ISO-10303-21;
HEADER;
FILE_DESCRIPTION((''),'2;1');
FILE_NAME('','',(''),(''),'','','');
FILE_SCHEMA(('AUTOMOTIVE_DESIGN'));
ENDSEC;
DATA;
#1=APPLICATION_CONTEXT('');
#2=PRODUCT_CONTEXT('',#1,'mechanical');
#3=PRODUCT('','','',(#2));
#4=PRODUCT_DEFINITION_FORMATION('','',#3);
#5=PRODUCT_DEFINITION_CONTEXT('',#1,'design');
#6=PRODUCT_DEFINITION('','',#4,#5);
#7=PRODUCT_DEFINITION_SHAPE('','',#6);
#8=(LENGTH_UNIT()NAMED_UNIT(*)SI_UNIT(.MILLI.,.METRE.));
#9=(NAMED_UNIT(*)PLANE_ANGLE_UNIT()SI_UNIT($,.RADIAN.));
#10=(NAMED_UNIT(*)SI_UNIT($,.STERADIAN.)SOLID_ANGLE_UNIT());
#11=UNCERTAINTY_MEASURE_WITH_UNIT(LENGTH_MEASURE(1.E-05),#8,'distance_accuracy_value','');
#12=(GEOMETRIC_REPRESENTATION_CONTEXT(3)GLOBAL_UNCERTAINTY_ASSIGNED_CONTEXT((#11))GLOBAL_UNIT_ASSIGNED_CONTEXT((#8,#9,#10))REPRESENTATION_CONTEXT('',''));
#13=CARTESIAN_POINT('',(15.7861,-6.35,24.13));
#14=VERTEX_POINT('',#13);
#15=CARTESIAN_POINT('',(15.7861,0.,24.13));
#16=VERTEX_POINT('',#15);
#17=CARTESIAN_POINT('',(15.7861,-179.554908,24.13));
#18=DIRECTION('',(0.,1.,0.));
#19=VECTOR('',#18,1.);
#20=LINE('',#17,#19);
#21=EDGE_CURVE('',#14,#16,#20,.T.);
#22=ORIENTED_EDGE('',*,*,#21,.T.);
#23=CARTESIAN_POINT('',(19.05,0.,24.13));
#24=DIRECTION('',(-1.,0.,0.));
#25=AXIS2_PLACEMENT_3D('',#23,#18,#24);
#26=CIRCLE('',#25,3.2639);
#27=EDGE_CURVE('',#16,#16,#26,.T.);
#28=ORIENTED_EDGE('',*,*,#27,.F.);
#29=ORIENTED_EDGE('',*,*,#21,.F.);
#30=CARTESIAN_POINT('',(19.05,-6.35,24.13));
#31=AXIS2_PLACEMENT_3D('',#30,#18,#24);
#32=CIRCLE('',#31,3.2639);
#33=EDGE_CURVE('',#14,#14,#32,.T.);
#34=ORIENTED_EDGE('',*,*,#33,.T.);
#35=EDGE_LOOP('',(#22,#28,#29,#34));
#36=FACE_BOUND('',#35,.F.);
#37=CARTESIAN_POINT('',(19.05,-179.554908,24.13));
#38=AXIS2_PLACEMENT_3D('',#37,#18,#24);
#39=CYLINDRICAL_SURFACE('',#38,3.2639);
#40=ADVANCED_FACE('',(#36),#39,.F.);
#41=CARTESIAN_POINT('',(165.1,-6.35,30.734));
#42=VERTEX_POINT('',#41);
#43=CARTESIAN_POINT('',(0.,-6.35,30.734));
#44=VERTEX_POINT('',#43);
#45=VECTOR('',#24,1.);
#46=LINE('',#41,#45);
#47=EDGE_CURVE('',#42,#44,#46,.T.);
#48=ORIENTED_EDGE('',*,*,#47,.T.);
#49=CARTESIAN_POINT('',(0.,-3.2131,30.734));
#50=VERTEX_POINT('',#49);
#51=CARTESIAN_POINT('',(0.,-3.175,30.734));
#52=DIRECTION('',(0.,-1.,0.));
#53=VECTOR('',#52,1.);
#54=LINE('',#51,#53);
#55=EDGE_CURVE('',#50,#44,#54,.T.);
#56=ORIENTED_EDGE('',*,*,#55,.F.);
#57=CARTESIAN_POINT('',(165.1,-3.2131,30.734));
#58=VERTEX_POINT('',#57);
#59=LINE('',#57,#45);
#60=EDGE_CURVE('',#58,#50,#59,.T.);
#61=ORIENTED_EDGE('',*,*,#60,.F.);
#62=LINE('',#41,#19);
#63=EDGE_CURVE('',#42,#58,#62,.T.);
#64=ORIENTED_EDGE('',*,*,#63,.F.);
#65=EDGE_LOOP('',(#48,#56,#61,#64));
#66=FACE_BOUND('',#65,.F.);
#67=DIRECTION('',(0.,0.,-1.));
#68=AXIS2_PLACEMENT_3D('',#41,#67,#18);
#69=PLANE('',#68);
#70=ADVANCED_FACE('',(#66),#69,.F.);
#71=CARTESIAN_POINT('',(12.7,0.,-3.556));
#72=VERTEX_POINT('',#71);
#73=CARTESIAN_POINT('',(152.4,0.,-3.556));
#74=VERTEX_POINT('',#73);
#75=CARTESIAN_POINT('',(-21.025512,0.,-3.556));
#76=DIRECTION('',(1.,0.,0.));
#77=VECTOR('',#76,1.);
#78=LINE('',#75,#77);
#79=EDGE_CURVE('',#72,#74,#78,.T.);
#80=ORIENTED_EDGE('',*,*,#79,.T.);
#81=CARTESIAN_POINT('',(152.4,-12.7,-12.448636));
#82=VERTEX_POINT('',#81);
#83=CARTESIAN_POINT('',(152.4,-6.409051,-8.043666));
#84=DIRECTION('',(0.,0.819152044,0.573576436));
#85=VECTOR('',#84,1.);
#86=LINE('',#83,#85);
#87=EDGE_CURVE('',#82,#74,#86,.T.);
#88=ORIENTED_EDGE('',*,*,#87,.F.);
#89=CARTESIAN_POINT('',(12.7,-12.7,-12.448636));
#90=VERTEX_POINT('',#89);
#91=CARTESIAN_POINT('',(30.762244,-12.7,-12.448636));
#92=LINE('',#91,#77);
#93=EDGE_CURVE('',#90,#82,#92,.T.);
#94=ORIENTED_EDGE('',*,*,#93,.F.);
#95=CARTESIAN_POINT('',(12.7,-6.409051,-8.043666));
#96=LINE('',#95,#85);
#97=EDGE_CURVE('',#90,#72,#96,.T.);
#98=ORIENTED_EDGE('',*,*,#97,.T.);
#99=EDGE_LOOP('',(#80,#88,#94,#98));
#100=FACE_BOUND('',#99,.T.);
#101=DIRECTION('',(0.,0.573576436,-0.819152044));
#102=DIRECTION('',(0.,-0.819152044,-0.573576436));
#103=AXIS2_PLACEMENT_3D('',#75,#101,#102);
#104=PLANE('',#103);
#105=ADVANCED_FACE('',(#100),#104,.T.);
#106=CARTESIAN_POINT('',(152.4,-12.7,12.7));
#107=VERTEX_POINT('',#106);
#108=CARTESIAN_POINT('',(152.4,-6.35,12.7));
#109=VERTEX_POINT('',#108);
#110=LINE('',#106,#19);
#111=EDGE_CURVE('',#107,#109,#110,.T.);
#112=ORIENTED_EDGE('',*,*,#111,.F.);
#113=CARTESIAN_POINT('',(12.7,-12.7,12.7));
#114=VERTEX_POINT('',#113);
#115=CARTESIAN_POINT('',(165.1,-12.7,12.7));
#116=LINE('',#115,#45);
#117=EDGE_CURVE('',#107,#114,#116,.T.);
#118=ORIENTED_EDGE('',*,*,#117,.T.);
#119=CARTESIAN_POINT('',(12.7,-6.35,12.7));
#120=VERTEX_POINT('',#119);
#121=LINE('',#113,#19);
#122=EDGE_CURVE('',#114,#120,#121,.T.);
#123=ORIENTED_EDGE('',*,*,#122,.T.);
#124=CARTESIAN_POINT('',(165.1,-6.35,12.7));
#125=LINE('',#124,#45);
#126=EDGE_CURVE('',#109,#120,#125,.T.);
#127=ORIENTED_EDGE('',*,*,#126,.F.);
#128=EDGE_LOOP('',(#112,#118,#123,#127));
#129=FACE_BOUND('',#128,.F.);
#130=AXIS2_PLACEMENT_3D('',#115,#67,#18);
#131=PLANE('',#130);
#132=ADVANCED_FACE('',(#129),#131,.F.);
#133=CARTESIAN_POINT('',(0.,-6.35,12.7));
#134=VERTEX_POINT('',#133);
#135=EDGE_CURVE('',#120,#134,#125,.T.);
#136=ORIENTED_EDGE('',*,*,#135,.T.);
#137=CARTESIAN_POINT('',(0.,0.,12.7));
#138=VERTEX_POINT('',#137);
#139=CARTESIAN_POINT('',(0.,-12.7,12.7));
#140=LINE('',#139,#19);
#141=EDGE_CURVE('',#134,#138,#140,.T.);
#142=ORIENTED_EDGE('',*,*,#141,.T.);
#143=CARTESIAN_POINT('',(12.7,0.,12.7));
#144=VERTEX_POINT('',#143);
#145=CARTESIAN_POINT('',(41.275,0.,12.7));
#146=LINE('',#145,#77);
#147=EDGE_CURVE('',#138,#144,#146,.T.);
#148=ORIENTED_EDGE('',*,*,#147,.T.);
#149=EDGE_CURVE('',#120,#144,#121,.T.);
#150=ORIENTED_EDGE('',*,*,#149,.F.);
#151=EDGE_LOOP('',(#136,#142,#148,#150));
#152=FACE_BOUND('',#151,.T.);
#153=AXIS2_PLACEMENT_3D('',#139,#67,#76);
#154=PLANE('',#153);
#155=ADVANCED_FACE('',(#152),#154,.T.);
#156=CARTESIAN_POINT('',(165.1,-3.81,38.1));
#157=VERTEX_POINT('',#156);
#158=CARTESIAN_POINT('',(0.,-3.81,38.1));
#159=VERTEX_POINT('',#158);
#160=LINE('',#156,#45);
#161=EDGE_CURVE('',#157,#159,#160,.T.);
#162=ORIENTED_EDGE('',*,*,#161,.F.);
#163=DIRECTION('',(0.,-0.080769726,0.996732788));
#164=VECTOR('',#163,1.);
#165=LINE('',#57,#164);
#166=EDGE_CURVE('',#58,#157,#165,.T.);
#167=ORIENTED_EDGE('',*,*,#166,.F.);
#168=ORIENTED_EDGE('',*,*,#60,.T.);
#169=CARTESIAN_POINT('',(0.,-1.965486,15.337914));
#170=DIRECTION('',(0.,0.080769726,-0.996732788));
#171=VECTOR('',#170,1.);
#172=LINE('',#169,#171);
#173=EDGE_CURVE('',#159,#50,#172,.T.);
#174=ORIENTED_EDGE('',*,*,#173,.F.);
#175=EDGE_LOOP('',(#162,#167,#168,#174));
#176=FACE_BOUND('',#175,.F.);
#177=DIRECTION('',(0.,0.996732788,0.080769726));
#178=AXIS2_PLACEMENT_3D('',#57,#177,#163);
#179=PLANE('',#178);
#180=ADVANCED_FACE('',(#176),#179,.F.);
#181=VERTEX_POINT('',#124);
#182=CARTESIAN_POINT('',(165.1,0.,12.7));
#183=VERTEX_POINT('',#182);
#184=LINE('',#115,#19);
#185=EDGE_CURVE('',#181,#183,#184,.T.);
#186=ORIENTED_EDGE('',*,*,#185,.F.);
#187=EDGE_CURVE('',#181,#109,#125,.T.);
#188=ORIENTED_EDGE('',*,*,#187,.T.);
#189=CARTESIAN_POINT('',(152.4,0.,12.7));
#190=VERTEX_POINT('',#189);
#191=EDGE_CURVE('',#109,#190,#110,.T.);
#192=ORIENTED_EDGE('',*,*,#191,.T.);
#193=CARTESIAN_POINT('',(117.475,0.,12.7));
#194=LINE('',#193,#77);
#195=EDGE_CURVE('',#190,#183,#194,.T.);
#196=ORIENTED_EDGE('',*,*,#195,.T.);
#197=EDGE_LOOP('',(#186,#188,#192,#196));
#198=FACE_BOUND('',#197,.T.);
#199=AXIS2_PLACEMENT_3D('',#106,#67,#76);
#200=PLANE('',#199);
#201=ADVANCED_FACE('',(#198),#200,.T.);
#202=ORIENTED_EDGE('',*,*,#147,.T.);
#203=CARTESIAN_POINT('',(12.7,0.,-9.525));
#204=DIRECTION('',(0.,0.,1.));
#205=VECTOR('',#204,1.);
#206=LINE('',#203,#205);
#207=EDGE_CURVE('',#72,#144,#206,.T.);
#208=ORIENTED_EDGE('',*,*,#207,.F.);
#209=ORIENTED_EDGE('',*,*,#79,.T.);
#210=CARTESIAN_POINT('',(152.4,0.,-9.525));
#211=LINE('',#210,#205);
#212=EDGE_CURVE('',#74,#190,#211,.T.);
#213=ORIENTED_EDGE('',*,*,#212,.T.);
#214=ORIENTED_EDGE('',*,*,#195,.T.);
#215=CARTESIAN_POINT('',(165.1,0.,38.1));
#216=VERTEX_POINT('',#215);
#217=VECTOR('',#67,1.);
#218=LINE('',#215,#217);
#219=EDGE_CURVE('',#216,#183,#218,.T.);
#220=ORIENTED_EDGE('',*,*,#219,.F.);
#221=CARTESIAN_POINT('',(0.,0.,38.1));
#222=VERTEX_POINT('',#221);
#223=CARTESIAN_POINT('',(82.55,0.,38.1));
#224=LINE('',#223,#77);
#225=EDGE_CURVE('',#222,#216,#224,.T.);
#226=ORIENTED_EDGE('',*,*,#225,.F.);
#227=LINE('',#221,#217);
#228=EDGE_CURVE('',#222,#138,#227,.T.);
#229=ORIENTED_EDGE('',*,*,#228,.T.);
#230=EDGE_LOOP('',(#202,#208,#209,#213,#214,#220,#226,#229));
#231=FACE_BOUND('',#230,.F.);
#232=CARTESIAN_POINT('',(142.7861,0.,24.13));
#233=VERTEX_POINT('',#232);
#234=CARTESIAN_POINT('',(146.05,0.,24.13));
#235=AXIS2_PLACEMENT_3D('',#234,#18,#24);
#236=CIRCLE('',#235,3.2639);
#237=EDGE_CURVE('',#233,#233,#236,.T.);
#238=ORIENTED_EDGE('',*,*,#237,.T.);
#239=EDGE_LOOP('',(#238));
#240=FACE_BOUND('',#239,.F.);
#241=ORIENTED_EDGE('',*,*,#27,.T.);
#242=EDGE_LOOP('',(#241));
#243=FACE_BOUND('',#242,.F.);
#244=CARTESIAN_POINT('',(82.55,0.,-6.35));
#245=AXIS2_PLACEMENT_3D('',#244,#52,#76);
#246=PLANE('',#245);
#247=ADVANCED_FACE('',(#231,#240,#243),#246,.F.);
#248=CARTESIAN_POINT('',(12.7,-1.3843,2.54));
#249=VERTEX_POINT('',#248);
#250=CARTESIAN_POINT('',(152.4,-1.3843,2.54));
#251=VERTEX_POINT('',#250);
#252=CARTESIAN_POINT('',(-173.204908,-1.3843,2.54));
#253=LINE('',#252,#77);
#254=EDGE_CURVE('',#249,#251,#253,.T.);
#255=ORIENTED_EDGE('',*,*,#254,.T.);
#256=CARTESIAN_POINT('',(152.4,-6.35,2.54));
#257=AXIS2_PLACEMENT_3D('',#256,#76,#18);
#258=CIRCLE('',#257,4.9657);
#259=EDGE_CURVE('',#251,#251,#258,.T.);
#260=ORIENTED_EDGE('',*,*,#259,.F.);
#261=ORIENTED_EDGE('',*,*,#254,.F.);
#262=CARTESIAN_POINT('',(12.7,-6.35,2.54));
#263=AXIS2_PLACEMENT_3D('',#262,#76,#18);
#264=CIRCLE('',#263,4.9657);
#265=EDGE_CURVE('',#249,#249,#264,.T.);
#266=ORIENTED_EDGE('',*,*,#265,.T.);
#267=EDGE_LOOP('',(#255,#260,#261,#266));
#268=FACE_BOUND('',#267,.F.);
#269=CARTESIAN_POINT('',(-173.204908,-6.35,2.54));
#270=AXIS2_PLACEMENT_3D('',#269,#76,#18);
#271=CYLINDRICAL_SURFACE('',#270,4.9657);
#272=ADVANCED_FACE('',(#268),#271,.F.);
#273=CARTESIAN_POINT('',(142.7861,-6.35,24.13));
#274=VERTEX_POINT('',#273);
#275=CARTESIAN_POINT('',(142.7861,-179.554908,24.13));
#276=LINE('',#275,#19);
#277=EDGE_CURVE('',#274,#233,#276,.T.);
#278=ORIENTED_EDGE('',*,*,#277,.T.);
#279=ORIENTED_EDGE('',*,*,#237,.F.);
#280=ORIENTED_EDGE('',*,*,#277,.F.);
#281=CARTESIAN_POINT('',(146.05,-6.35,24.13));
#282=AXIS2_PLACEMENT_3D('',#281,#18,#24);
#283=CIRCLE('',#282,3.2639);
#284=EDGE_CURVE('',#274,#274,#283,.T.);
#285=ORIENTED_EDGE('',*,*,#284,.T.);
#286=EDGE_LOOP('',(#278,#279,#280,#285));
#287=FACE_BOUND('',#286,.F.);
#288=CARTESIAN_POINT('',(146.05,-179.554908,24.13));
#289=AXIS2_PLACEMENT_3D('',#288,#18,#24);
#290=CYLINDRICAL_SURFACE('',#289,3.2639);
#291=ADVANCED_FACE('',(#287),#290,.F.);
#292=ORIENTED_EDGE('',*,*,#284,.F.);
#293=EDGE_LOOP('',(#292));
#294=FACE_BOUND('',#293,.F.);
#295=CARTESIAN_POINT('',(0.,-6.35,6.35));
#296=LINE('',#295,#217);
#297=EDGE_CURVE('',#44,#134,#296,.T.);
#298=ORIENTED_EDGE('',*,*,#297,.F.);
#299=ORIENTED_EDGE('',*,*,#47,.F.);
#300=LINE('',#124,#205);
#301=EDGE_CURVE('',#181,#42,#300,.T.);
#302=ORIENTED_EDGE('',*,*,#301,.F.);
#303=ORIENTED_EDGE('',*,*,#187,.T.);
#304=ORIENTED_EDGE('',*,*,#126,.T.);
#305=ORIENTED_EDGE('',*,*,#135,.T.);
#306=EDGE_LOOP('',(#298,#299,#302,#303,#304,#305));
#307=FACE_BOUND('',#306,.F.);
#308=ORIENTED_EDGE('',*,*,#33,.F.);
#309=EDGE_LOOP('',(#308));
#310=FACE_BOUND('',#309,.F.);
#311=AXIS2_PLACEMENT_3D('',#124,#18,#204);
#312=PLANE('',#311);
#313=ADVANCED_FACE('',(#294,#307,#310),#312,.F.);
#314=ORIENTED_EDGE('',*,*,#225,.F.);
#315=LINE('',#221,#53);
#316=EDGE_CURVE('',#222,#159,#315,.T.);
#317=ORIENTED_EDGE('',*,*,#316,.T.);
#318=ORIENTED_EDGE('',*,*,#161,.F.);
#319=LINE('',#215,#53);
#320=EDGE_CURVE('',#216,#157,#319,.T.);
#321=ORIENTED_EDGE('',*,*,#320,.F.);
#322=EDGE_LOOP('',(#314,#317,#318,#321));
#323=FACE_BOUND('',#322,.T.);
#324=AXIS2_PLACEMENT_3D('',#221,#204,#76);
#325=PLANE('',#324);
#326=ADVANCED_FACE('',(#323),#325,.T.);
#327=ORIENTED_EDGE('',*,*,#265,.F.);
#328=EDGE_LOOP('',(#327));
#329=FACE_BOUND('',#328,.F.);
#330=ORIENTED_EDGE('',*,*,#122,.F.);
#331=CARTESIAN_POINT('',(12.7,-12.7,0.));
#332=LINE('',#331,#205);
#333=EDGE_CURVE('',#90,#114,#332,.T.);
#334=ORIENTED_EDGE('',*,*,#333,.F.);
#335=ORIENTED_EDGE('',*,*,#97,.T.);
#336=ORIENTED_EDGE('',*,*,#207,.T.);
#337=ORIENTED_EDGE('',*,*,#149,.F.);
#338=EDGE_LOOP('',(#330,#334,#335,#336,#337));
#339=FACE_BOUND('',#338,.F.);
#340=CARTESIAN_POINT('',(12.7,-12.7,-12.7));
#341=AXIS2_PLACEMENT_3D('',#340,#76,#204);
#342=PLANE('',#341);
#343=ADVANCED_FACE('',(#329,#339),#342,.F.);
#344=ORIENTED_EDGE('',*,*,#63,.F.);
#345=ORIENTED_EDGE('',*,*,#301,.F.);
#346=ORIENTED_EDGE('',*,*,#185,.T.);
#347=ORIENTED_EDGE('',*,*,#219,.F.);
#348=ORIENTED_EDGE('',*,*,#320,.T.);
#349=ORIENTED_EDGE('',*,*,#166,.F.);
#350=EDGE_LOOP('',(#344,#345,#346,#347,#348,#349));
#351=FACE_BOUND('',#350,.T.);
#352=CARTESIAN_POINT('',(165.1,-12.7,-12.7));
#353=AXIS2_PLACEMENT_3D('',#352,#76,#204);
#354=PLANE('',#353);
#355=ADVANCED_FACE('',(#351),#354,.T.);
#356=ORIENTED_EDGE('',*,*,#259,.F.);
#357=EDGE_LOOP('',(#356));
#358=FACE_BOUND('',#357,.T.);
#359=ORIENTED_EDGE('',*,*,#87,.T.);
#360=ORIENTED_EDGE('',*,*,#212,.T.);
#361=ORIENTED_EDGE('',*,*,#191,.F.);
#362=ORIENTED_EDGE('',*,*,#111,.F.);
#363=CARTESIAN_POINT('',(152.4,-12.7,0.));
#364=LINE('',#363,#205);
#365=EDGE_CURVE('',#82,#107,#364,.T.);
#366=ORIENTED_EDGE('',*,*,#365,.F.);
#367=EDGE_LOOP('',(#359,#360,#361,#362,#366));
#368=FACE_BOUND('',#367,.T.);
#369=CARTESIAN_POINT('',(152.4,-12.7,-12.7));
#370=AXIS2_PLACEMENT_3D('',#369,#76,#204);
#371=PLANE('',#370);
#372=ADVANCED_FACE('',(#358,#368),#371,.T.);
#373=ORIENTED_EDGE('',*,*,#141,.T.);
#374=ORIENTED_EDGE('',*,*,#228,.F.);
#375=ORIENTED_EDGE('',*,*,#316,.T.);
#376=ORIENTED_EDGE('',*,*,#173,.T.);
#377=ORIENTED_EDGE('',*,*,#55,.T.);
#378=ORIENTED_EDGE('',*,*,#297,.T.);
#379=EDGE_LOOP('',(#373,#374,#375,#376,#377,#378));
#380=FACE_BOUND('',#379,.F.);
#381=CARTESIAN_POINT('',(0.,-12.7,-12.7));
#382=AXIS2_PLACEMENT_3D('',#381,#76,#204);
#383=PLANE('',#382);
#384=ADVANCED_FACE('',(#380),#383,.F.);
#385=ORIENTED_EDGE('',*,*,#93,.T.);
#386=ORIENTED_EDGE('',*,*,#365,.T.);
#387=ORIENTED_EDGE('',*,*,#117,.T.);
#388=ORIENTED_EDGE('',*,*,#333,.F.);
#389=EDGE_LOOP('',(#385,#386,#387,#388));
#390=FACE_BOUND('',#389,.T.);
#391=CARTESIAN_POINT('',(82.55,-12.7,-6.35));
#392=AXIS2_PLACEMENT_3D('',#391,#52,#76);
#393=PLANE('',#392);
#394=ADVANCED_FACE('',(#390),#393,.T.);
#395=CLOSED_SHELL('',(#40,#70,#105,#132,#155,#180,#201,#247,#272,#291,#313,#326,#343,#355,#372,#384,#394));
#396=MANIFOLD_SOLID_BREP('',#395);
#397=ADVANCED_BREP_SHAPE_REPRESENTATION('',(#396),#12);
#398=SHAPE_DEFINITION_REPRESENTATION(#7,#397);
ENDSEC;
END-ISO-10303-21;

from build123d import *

# Parameters (mm, degrees)
F0_W         = 165.1
F0_H         = 38.1
F1_DEPTH     = 12.7
F3_DEPTH     = 165.101
F4_W         = 165.1
F4_H         = 12.7
F5_DEPTH     = 12.7
F7_D         = 6.5278
F9_W         = 12.7
F9_H         = 25.4
F10_DEPTH    = 12.701
F11_D        = 9.9314
F12_T1_DEPTH = 207.1510236039


# Not quite as in the source:
# - a fillet or chamfer that OpenCascade refuses, or shapes differently, is made with other operations: its cross-section is extruded or revolved along the edge and cut away or added


with BuildPart() as f1:
    # F0 (on Front) → F1 (new body)
    with BuildSketch(Plane.XZ):
        with Locations((82.55, 19.05)):
            Rectangle(F0_W, F0_H)
    extrude(amount=F1_DEPTH)

    # F2 (on face) → F3 (cut, through all)
    with BuildSketch(Plane.YZ.offset(165.1)):
        Polygon((-6.35, 12.7), (-6.35, 30.734), (-3.2131, 30.734), (-3.81, 38.1), (-8.89, 38.1), (-12.7, 38.1), (-12.7, 27.7622), (-12.7, 12.7), align=None)
    extrude(amount=-F3_DEPTH, mode=Mode.SUBTRACT)

    # F4 (on face) → F5 (join)
    with BuildSketch(Plane.XZ.offset(12.7)):
        with Locations((82.55, -6.35)):
            Rectangle(F4_W, F4_H)
    extrude(amount=-F5_DEPTH)

    # F7 (through all)
    with Locations(Plane.XZ.offset(6.35)):
        with Locations((19.05, 24.13), (146.05, 24.13)):
            Hole(F7_D / 2)

    # F9 (on face) → F10 (cut, through all)
    with BuildSketch(Plane.XZ.offset(12.7)):
        with Locations((6.35, 0)):
            Rectangle(F9_W, F9_H)
        with Locations((158.75, 0)):
            Rectangle(F9_W, F9_H)
    extrude(amount=-F10_DEPTH, mode=Mode.SUBTRACT)

    # F11 (through all)
    with Locations(Plane(origin=(0, 0, 0), x_dir=(0, -1, 0), z_dir=(-1, 0, 0))):
        with Locations((6.35, 2.54)):
            Hole(F11_D / 2)

    # F12: chamfer of 9.144 x 13.0589853736 on 1 edges, made by hand

    # F12_s2 → F12_t1 (cut)
    with BuildSketch(Plane.YZ.offset(-21.025511802)):
        Polygon((0, -3.556), (-13.0589853736, -12.7), (0, -12.7), align=None)
    extrude(amount=F12_T1_DEPTH, mode=Mode.SUBTRACT)


solid = f1.part
